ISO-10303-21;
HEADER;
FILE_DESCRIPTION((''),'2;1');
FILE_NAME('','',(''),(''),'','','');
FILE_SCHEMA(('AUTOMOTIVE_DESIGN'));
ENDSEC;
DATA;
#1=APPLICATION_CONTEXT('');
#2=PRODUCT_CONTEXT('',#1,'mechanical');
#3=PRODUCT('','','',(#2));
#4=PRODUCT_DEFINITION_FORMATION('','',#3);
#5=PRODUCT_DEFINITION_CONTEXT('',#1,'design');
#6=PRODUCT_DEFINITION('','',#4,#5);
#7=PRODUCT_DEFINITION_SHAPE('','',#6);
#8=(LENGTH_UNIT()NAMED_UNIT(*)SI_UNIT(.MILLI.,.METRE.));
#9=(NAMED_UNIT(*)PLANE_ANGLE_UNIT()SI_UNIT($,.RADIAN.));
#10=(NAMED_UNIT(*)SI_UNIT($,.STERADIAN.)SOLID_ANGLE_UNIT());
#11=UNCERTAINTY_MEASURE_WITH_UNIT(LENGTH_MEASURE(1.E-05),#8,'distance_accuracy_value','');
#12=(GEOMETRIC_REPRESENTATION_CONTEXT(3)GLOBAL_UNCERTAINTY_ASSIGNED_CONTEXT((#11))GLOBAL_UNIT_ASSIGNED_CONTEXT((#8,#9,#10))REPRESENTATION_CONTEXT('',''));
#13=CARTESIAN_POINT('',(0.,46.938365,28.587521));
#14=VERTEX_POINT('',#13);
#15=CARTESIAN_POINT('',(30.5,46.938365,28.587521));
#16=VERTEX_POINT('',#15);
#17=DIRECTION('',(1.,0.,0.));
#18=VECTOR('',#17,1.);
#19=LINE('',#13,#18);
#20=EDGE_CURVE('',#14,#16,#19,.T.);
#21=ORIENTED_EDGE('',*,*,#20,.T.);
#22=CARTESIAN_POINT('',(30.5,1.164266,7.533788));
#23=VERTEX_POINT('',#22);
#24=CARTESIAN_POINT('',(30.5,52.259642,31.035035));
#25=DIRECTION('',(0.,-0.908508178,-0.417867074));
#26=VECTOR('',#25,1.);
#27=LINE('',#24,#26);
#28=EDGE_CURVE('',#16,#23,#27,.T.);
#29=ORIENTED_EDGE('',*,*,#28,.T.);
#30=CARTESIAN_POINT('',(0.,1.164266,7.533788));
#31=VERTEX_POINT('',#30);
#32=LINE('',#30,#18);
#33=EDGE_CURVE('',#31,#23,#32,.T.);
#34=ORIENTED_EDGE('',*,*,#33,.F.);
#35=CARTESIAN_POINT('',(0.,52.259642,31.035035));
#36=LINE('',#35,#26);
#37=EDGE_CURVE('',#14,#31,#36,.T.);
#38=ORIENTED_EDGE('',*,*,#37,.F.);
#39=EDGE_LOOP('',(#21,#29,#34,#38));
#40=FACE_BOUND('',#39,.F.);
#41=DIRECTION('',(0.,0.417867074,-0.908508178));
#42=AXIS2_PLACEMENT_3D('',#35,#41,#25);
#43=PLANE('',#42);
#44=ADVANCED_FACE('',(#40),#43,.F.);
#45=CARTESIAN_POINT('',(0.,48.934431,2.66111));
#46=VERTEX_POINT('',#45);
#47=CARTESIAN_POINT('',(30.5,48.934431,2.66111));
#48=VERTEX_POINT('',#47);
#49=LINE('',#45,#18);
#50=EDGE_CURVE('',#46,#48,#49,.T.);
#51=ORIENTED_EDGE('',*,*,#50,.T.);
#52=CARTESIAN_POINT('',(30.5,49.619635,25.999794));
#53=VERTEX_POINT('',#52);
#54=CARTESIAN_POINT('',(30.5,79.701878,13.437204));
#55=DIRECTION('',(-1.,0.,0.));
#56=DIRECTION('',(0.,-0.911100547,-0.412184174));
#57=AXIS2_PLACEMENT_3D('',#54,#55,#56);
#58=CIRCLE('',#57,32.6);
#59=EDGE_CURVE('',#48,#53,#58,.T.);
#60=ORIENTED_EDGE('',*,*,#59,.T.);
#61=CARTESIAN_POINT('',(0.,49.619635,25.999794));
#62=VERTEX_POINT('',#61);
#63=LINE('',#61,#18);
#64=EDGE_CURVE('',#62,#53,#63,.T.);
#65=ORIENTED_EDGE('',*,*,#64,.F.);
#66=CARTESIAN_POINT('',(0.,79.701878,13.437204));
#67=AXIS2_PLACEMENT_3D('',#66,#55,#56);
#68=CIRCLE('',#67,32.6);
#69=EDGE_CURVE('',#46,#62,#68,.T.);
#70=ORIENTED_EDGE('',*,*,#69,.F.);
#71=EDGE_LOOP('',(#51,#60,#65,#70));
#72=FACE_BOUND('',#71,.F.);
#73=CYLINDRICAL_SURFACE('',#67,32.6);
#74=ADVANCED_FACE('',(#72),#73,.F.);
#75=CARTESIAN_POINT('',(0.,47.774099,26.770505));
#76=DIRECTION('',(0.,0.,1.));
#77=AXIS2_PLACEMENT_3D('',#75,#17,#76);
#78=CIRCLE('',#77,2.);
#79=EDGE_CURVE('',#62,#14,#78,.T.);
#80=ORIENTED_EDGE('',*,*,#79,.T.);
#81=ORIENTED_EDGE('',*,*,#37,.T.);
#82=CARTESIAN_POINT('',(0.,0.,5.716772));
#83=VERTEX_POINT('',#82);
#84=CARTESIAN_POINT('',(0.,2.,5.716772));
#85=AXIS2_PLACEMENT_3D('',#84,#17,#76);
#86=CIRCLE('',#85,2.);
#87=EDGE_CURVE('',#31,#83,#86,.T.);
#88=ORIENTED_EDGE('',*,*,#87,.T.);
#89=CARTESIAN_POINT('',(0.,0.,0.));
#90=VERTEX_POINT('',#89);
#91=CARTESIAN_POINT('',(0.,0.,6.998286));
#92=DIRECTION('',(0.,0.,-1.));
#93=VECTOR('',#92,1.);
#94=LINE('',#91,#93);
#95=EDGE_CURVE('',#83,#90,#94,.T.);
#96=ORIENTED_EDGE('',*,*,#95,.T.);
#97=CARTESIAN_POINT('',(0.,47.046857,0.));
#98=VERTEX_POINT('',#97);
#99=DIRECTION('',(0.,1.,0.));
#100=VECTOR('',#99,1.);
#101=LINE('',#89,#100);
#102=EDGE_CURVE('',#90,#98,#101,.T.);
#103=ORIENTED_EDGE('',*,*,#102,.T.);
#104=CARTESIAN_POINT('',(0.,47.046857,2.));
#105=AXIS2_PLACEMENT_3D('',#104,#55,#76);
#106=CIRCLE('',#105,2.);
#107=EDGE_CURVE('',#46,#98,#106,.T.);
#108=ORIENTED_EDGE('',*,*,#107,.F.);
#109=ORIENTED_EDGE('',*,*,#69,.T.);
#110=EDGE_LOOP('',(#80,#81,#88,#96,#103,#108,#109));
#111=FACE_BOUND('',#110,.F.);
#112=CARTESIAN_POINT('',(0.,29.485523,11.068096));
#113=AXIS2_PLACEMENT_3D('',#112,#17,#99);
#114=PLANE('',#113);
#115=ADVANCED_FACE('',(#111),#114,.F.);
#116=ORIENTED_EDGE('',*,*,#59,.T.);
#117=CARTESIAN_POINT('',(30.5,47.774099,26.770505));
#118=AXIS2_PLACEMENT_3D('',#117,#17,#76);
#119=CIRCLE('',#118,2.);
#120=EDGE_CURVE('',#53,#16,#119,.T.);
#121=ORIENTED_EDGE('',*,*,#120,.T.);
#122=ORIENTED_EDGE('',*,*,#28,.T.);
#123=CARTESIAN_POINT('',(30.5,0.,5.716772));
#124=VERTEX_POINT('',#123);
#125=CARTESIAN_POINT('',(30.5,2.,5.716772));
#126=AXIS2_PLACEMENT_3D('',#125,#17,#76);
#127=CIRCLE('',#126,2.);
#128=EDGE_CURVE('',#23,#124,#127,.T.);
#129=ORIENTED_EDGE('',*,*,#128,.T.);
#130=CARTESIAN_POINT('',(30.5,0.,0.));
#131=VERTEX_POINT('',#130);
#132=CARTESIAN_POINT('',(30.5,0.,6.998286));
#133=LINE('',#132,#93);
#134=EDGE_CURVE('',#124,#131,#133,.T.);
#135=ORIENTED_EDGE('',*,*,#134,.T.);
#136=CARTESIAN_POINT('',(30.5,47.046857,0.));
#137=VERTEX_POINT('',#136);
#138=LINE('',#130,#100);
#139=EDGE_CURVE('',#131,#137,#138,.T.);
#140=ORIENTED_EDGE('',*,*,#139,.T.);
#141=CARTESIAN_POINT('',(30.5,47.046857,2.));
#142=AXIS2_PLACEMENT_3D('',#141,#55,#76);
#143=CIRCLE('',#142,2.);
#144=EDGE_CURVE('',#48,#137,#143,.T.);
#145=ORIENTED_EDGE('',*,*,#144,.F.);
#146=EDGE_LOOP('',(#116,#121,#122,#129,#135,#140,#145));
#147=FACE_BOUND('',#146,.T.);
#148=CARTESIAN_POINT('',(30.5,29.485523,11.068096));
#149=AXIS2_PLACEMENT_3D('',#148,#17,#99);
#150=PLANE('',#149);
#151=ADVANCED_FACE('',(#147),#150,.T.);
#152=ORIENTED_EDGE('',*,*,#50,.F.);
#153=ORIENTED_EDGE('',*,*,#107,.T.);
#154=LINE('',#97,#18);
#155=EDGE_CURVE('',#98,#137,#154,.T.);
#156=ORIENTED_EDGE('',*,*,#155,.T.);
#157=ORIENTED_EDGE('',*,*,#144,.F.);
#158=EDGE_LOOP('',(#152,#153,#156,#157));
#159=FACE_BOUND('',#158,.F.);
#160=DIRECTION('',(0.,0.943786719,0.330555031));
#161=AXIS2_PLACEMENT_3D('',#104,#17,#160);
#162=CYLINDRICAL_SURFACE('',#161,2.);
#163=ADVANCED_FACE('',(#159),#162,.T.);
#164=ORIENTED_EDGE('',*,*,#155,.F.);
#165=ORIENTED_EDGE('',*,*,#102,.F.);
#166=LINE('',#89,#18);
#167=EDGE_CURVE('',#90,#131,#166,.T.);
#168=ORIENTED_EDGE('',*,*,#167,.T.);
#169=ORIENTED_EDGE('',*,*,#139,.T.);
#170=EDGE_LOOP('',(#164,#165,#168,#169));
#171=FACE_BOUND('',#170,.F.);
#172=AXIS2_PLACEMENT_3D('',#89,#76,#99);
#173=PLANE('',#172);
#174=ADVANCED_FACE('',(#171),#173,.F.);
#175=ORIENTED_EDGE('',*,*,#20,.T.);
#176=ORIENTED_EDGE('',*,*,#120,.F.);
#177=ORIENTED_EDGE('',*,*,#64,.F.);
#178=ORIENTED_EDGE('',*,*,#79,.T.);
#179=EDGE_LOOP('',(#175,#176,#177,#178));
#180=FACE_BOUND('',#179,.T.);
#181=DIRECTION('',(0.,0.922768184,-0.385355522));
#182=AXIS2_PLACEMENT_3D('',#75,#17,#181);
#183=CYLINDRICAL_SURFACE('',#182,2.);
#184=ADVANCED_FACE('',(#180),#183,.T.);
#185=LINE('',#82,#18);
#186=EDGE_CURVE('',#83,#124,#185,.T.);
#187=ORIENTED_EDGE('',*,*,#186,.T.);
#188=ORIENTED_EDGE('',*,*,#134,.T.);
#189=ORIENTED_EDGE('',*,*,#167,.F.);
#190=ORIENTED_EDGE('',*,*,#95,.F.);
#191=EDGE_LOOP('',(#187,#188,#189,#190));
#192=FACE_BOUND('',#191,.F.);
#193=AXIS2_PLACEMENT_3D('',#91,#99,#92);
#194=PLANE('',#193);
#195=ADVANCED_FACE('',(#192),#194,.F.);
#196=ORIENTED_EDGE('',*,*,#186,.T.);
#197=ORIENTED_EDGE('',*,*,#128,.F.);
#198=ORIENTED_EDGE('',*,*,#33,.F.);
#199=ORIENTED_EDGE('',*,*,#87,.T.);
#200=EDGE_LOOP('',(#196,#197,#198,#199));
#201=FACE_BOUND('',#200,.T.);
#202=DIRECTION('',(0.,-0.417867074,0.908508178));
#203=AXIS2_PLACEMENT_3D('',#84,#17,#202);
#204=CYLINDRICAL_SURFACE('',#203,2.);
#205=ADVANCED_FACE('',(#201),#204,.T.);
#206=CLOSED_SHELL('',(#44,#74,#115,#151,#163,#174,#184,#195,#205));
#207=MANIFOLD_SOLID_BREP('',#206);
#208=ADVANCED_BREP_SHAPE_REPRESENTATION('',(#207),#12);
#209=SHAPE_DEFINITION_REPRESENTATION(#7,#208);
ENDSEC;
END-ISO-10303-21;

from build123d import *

# Parameters (mm, degrees)
F1_DEPTH = 30.5
F2_R     = 2
F3_R     = 2


with BuildPart() as f1:
    # F0 (on Right) → F1 (new body)
    with BuildSketch(Plane.YZ):
        with BuildLine():
            Line((0, 6.9982859343), (0, 0))
            Line((0, 0), (50, 0))
            ThreePointArc((50, 0), (47.1879454394, 15.8045232241), (52.2596416003, 31.035035469))
            Line((52.2596416003, 31.035035469), (0, 6.9982859343))
        make_face()
    extrude(amount=F1_DEPTH)

    # F2
    f2_edges = [f1.edges().sort_by_distance(p)[0] for p in [
        (15.25, 52.259642, 31.035035),
    ]]
    fillet(f2_edges, radius=F2_R)

    # F3
    f3_edges = [f1.edges().sort_by_distance(p)[0] for p in [
        (15.25, 0, 6.998286),
        (15.25, 50, 0),
    ]]
    fillet(f3_edges, radius=F3_R)


solid = f1.part
